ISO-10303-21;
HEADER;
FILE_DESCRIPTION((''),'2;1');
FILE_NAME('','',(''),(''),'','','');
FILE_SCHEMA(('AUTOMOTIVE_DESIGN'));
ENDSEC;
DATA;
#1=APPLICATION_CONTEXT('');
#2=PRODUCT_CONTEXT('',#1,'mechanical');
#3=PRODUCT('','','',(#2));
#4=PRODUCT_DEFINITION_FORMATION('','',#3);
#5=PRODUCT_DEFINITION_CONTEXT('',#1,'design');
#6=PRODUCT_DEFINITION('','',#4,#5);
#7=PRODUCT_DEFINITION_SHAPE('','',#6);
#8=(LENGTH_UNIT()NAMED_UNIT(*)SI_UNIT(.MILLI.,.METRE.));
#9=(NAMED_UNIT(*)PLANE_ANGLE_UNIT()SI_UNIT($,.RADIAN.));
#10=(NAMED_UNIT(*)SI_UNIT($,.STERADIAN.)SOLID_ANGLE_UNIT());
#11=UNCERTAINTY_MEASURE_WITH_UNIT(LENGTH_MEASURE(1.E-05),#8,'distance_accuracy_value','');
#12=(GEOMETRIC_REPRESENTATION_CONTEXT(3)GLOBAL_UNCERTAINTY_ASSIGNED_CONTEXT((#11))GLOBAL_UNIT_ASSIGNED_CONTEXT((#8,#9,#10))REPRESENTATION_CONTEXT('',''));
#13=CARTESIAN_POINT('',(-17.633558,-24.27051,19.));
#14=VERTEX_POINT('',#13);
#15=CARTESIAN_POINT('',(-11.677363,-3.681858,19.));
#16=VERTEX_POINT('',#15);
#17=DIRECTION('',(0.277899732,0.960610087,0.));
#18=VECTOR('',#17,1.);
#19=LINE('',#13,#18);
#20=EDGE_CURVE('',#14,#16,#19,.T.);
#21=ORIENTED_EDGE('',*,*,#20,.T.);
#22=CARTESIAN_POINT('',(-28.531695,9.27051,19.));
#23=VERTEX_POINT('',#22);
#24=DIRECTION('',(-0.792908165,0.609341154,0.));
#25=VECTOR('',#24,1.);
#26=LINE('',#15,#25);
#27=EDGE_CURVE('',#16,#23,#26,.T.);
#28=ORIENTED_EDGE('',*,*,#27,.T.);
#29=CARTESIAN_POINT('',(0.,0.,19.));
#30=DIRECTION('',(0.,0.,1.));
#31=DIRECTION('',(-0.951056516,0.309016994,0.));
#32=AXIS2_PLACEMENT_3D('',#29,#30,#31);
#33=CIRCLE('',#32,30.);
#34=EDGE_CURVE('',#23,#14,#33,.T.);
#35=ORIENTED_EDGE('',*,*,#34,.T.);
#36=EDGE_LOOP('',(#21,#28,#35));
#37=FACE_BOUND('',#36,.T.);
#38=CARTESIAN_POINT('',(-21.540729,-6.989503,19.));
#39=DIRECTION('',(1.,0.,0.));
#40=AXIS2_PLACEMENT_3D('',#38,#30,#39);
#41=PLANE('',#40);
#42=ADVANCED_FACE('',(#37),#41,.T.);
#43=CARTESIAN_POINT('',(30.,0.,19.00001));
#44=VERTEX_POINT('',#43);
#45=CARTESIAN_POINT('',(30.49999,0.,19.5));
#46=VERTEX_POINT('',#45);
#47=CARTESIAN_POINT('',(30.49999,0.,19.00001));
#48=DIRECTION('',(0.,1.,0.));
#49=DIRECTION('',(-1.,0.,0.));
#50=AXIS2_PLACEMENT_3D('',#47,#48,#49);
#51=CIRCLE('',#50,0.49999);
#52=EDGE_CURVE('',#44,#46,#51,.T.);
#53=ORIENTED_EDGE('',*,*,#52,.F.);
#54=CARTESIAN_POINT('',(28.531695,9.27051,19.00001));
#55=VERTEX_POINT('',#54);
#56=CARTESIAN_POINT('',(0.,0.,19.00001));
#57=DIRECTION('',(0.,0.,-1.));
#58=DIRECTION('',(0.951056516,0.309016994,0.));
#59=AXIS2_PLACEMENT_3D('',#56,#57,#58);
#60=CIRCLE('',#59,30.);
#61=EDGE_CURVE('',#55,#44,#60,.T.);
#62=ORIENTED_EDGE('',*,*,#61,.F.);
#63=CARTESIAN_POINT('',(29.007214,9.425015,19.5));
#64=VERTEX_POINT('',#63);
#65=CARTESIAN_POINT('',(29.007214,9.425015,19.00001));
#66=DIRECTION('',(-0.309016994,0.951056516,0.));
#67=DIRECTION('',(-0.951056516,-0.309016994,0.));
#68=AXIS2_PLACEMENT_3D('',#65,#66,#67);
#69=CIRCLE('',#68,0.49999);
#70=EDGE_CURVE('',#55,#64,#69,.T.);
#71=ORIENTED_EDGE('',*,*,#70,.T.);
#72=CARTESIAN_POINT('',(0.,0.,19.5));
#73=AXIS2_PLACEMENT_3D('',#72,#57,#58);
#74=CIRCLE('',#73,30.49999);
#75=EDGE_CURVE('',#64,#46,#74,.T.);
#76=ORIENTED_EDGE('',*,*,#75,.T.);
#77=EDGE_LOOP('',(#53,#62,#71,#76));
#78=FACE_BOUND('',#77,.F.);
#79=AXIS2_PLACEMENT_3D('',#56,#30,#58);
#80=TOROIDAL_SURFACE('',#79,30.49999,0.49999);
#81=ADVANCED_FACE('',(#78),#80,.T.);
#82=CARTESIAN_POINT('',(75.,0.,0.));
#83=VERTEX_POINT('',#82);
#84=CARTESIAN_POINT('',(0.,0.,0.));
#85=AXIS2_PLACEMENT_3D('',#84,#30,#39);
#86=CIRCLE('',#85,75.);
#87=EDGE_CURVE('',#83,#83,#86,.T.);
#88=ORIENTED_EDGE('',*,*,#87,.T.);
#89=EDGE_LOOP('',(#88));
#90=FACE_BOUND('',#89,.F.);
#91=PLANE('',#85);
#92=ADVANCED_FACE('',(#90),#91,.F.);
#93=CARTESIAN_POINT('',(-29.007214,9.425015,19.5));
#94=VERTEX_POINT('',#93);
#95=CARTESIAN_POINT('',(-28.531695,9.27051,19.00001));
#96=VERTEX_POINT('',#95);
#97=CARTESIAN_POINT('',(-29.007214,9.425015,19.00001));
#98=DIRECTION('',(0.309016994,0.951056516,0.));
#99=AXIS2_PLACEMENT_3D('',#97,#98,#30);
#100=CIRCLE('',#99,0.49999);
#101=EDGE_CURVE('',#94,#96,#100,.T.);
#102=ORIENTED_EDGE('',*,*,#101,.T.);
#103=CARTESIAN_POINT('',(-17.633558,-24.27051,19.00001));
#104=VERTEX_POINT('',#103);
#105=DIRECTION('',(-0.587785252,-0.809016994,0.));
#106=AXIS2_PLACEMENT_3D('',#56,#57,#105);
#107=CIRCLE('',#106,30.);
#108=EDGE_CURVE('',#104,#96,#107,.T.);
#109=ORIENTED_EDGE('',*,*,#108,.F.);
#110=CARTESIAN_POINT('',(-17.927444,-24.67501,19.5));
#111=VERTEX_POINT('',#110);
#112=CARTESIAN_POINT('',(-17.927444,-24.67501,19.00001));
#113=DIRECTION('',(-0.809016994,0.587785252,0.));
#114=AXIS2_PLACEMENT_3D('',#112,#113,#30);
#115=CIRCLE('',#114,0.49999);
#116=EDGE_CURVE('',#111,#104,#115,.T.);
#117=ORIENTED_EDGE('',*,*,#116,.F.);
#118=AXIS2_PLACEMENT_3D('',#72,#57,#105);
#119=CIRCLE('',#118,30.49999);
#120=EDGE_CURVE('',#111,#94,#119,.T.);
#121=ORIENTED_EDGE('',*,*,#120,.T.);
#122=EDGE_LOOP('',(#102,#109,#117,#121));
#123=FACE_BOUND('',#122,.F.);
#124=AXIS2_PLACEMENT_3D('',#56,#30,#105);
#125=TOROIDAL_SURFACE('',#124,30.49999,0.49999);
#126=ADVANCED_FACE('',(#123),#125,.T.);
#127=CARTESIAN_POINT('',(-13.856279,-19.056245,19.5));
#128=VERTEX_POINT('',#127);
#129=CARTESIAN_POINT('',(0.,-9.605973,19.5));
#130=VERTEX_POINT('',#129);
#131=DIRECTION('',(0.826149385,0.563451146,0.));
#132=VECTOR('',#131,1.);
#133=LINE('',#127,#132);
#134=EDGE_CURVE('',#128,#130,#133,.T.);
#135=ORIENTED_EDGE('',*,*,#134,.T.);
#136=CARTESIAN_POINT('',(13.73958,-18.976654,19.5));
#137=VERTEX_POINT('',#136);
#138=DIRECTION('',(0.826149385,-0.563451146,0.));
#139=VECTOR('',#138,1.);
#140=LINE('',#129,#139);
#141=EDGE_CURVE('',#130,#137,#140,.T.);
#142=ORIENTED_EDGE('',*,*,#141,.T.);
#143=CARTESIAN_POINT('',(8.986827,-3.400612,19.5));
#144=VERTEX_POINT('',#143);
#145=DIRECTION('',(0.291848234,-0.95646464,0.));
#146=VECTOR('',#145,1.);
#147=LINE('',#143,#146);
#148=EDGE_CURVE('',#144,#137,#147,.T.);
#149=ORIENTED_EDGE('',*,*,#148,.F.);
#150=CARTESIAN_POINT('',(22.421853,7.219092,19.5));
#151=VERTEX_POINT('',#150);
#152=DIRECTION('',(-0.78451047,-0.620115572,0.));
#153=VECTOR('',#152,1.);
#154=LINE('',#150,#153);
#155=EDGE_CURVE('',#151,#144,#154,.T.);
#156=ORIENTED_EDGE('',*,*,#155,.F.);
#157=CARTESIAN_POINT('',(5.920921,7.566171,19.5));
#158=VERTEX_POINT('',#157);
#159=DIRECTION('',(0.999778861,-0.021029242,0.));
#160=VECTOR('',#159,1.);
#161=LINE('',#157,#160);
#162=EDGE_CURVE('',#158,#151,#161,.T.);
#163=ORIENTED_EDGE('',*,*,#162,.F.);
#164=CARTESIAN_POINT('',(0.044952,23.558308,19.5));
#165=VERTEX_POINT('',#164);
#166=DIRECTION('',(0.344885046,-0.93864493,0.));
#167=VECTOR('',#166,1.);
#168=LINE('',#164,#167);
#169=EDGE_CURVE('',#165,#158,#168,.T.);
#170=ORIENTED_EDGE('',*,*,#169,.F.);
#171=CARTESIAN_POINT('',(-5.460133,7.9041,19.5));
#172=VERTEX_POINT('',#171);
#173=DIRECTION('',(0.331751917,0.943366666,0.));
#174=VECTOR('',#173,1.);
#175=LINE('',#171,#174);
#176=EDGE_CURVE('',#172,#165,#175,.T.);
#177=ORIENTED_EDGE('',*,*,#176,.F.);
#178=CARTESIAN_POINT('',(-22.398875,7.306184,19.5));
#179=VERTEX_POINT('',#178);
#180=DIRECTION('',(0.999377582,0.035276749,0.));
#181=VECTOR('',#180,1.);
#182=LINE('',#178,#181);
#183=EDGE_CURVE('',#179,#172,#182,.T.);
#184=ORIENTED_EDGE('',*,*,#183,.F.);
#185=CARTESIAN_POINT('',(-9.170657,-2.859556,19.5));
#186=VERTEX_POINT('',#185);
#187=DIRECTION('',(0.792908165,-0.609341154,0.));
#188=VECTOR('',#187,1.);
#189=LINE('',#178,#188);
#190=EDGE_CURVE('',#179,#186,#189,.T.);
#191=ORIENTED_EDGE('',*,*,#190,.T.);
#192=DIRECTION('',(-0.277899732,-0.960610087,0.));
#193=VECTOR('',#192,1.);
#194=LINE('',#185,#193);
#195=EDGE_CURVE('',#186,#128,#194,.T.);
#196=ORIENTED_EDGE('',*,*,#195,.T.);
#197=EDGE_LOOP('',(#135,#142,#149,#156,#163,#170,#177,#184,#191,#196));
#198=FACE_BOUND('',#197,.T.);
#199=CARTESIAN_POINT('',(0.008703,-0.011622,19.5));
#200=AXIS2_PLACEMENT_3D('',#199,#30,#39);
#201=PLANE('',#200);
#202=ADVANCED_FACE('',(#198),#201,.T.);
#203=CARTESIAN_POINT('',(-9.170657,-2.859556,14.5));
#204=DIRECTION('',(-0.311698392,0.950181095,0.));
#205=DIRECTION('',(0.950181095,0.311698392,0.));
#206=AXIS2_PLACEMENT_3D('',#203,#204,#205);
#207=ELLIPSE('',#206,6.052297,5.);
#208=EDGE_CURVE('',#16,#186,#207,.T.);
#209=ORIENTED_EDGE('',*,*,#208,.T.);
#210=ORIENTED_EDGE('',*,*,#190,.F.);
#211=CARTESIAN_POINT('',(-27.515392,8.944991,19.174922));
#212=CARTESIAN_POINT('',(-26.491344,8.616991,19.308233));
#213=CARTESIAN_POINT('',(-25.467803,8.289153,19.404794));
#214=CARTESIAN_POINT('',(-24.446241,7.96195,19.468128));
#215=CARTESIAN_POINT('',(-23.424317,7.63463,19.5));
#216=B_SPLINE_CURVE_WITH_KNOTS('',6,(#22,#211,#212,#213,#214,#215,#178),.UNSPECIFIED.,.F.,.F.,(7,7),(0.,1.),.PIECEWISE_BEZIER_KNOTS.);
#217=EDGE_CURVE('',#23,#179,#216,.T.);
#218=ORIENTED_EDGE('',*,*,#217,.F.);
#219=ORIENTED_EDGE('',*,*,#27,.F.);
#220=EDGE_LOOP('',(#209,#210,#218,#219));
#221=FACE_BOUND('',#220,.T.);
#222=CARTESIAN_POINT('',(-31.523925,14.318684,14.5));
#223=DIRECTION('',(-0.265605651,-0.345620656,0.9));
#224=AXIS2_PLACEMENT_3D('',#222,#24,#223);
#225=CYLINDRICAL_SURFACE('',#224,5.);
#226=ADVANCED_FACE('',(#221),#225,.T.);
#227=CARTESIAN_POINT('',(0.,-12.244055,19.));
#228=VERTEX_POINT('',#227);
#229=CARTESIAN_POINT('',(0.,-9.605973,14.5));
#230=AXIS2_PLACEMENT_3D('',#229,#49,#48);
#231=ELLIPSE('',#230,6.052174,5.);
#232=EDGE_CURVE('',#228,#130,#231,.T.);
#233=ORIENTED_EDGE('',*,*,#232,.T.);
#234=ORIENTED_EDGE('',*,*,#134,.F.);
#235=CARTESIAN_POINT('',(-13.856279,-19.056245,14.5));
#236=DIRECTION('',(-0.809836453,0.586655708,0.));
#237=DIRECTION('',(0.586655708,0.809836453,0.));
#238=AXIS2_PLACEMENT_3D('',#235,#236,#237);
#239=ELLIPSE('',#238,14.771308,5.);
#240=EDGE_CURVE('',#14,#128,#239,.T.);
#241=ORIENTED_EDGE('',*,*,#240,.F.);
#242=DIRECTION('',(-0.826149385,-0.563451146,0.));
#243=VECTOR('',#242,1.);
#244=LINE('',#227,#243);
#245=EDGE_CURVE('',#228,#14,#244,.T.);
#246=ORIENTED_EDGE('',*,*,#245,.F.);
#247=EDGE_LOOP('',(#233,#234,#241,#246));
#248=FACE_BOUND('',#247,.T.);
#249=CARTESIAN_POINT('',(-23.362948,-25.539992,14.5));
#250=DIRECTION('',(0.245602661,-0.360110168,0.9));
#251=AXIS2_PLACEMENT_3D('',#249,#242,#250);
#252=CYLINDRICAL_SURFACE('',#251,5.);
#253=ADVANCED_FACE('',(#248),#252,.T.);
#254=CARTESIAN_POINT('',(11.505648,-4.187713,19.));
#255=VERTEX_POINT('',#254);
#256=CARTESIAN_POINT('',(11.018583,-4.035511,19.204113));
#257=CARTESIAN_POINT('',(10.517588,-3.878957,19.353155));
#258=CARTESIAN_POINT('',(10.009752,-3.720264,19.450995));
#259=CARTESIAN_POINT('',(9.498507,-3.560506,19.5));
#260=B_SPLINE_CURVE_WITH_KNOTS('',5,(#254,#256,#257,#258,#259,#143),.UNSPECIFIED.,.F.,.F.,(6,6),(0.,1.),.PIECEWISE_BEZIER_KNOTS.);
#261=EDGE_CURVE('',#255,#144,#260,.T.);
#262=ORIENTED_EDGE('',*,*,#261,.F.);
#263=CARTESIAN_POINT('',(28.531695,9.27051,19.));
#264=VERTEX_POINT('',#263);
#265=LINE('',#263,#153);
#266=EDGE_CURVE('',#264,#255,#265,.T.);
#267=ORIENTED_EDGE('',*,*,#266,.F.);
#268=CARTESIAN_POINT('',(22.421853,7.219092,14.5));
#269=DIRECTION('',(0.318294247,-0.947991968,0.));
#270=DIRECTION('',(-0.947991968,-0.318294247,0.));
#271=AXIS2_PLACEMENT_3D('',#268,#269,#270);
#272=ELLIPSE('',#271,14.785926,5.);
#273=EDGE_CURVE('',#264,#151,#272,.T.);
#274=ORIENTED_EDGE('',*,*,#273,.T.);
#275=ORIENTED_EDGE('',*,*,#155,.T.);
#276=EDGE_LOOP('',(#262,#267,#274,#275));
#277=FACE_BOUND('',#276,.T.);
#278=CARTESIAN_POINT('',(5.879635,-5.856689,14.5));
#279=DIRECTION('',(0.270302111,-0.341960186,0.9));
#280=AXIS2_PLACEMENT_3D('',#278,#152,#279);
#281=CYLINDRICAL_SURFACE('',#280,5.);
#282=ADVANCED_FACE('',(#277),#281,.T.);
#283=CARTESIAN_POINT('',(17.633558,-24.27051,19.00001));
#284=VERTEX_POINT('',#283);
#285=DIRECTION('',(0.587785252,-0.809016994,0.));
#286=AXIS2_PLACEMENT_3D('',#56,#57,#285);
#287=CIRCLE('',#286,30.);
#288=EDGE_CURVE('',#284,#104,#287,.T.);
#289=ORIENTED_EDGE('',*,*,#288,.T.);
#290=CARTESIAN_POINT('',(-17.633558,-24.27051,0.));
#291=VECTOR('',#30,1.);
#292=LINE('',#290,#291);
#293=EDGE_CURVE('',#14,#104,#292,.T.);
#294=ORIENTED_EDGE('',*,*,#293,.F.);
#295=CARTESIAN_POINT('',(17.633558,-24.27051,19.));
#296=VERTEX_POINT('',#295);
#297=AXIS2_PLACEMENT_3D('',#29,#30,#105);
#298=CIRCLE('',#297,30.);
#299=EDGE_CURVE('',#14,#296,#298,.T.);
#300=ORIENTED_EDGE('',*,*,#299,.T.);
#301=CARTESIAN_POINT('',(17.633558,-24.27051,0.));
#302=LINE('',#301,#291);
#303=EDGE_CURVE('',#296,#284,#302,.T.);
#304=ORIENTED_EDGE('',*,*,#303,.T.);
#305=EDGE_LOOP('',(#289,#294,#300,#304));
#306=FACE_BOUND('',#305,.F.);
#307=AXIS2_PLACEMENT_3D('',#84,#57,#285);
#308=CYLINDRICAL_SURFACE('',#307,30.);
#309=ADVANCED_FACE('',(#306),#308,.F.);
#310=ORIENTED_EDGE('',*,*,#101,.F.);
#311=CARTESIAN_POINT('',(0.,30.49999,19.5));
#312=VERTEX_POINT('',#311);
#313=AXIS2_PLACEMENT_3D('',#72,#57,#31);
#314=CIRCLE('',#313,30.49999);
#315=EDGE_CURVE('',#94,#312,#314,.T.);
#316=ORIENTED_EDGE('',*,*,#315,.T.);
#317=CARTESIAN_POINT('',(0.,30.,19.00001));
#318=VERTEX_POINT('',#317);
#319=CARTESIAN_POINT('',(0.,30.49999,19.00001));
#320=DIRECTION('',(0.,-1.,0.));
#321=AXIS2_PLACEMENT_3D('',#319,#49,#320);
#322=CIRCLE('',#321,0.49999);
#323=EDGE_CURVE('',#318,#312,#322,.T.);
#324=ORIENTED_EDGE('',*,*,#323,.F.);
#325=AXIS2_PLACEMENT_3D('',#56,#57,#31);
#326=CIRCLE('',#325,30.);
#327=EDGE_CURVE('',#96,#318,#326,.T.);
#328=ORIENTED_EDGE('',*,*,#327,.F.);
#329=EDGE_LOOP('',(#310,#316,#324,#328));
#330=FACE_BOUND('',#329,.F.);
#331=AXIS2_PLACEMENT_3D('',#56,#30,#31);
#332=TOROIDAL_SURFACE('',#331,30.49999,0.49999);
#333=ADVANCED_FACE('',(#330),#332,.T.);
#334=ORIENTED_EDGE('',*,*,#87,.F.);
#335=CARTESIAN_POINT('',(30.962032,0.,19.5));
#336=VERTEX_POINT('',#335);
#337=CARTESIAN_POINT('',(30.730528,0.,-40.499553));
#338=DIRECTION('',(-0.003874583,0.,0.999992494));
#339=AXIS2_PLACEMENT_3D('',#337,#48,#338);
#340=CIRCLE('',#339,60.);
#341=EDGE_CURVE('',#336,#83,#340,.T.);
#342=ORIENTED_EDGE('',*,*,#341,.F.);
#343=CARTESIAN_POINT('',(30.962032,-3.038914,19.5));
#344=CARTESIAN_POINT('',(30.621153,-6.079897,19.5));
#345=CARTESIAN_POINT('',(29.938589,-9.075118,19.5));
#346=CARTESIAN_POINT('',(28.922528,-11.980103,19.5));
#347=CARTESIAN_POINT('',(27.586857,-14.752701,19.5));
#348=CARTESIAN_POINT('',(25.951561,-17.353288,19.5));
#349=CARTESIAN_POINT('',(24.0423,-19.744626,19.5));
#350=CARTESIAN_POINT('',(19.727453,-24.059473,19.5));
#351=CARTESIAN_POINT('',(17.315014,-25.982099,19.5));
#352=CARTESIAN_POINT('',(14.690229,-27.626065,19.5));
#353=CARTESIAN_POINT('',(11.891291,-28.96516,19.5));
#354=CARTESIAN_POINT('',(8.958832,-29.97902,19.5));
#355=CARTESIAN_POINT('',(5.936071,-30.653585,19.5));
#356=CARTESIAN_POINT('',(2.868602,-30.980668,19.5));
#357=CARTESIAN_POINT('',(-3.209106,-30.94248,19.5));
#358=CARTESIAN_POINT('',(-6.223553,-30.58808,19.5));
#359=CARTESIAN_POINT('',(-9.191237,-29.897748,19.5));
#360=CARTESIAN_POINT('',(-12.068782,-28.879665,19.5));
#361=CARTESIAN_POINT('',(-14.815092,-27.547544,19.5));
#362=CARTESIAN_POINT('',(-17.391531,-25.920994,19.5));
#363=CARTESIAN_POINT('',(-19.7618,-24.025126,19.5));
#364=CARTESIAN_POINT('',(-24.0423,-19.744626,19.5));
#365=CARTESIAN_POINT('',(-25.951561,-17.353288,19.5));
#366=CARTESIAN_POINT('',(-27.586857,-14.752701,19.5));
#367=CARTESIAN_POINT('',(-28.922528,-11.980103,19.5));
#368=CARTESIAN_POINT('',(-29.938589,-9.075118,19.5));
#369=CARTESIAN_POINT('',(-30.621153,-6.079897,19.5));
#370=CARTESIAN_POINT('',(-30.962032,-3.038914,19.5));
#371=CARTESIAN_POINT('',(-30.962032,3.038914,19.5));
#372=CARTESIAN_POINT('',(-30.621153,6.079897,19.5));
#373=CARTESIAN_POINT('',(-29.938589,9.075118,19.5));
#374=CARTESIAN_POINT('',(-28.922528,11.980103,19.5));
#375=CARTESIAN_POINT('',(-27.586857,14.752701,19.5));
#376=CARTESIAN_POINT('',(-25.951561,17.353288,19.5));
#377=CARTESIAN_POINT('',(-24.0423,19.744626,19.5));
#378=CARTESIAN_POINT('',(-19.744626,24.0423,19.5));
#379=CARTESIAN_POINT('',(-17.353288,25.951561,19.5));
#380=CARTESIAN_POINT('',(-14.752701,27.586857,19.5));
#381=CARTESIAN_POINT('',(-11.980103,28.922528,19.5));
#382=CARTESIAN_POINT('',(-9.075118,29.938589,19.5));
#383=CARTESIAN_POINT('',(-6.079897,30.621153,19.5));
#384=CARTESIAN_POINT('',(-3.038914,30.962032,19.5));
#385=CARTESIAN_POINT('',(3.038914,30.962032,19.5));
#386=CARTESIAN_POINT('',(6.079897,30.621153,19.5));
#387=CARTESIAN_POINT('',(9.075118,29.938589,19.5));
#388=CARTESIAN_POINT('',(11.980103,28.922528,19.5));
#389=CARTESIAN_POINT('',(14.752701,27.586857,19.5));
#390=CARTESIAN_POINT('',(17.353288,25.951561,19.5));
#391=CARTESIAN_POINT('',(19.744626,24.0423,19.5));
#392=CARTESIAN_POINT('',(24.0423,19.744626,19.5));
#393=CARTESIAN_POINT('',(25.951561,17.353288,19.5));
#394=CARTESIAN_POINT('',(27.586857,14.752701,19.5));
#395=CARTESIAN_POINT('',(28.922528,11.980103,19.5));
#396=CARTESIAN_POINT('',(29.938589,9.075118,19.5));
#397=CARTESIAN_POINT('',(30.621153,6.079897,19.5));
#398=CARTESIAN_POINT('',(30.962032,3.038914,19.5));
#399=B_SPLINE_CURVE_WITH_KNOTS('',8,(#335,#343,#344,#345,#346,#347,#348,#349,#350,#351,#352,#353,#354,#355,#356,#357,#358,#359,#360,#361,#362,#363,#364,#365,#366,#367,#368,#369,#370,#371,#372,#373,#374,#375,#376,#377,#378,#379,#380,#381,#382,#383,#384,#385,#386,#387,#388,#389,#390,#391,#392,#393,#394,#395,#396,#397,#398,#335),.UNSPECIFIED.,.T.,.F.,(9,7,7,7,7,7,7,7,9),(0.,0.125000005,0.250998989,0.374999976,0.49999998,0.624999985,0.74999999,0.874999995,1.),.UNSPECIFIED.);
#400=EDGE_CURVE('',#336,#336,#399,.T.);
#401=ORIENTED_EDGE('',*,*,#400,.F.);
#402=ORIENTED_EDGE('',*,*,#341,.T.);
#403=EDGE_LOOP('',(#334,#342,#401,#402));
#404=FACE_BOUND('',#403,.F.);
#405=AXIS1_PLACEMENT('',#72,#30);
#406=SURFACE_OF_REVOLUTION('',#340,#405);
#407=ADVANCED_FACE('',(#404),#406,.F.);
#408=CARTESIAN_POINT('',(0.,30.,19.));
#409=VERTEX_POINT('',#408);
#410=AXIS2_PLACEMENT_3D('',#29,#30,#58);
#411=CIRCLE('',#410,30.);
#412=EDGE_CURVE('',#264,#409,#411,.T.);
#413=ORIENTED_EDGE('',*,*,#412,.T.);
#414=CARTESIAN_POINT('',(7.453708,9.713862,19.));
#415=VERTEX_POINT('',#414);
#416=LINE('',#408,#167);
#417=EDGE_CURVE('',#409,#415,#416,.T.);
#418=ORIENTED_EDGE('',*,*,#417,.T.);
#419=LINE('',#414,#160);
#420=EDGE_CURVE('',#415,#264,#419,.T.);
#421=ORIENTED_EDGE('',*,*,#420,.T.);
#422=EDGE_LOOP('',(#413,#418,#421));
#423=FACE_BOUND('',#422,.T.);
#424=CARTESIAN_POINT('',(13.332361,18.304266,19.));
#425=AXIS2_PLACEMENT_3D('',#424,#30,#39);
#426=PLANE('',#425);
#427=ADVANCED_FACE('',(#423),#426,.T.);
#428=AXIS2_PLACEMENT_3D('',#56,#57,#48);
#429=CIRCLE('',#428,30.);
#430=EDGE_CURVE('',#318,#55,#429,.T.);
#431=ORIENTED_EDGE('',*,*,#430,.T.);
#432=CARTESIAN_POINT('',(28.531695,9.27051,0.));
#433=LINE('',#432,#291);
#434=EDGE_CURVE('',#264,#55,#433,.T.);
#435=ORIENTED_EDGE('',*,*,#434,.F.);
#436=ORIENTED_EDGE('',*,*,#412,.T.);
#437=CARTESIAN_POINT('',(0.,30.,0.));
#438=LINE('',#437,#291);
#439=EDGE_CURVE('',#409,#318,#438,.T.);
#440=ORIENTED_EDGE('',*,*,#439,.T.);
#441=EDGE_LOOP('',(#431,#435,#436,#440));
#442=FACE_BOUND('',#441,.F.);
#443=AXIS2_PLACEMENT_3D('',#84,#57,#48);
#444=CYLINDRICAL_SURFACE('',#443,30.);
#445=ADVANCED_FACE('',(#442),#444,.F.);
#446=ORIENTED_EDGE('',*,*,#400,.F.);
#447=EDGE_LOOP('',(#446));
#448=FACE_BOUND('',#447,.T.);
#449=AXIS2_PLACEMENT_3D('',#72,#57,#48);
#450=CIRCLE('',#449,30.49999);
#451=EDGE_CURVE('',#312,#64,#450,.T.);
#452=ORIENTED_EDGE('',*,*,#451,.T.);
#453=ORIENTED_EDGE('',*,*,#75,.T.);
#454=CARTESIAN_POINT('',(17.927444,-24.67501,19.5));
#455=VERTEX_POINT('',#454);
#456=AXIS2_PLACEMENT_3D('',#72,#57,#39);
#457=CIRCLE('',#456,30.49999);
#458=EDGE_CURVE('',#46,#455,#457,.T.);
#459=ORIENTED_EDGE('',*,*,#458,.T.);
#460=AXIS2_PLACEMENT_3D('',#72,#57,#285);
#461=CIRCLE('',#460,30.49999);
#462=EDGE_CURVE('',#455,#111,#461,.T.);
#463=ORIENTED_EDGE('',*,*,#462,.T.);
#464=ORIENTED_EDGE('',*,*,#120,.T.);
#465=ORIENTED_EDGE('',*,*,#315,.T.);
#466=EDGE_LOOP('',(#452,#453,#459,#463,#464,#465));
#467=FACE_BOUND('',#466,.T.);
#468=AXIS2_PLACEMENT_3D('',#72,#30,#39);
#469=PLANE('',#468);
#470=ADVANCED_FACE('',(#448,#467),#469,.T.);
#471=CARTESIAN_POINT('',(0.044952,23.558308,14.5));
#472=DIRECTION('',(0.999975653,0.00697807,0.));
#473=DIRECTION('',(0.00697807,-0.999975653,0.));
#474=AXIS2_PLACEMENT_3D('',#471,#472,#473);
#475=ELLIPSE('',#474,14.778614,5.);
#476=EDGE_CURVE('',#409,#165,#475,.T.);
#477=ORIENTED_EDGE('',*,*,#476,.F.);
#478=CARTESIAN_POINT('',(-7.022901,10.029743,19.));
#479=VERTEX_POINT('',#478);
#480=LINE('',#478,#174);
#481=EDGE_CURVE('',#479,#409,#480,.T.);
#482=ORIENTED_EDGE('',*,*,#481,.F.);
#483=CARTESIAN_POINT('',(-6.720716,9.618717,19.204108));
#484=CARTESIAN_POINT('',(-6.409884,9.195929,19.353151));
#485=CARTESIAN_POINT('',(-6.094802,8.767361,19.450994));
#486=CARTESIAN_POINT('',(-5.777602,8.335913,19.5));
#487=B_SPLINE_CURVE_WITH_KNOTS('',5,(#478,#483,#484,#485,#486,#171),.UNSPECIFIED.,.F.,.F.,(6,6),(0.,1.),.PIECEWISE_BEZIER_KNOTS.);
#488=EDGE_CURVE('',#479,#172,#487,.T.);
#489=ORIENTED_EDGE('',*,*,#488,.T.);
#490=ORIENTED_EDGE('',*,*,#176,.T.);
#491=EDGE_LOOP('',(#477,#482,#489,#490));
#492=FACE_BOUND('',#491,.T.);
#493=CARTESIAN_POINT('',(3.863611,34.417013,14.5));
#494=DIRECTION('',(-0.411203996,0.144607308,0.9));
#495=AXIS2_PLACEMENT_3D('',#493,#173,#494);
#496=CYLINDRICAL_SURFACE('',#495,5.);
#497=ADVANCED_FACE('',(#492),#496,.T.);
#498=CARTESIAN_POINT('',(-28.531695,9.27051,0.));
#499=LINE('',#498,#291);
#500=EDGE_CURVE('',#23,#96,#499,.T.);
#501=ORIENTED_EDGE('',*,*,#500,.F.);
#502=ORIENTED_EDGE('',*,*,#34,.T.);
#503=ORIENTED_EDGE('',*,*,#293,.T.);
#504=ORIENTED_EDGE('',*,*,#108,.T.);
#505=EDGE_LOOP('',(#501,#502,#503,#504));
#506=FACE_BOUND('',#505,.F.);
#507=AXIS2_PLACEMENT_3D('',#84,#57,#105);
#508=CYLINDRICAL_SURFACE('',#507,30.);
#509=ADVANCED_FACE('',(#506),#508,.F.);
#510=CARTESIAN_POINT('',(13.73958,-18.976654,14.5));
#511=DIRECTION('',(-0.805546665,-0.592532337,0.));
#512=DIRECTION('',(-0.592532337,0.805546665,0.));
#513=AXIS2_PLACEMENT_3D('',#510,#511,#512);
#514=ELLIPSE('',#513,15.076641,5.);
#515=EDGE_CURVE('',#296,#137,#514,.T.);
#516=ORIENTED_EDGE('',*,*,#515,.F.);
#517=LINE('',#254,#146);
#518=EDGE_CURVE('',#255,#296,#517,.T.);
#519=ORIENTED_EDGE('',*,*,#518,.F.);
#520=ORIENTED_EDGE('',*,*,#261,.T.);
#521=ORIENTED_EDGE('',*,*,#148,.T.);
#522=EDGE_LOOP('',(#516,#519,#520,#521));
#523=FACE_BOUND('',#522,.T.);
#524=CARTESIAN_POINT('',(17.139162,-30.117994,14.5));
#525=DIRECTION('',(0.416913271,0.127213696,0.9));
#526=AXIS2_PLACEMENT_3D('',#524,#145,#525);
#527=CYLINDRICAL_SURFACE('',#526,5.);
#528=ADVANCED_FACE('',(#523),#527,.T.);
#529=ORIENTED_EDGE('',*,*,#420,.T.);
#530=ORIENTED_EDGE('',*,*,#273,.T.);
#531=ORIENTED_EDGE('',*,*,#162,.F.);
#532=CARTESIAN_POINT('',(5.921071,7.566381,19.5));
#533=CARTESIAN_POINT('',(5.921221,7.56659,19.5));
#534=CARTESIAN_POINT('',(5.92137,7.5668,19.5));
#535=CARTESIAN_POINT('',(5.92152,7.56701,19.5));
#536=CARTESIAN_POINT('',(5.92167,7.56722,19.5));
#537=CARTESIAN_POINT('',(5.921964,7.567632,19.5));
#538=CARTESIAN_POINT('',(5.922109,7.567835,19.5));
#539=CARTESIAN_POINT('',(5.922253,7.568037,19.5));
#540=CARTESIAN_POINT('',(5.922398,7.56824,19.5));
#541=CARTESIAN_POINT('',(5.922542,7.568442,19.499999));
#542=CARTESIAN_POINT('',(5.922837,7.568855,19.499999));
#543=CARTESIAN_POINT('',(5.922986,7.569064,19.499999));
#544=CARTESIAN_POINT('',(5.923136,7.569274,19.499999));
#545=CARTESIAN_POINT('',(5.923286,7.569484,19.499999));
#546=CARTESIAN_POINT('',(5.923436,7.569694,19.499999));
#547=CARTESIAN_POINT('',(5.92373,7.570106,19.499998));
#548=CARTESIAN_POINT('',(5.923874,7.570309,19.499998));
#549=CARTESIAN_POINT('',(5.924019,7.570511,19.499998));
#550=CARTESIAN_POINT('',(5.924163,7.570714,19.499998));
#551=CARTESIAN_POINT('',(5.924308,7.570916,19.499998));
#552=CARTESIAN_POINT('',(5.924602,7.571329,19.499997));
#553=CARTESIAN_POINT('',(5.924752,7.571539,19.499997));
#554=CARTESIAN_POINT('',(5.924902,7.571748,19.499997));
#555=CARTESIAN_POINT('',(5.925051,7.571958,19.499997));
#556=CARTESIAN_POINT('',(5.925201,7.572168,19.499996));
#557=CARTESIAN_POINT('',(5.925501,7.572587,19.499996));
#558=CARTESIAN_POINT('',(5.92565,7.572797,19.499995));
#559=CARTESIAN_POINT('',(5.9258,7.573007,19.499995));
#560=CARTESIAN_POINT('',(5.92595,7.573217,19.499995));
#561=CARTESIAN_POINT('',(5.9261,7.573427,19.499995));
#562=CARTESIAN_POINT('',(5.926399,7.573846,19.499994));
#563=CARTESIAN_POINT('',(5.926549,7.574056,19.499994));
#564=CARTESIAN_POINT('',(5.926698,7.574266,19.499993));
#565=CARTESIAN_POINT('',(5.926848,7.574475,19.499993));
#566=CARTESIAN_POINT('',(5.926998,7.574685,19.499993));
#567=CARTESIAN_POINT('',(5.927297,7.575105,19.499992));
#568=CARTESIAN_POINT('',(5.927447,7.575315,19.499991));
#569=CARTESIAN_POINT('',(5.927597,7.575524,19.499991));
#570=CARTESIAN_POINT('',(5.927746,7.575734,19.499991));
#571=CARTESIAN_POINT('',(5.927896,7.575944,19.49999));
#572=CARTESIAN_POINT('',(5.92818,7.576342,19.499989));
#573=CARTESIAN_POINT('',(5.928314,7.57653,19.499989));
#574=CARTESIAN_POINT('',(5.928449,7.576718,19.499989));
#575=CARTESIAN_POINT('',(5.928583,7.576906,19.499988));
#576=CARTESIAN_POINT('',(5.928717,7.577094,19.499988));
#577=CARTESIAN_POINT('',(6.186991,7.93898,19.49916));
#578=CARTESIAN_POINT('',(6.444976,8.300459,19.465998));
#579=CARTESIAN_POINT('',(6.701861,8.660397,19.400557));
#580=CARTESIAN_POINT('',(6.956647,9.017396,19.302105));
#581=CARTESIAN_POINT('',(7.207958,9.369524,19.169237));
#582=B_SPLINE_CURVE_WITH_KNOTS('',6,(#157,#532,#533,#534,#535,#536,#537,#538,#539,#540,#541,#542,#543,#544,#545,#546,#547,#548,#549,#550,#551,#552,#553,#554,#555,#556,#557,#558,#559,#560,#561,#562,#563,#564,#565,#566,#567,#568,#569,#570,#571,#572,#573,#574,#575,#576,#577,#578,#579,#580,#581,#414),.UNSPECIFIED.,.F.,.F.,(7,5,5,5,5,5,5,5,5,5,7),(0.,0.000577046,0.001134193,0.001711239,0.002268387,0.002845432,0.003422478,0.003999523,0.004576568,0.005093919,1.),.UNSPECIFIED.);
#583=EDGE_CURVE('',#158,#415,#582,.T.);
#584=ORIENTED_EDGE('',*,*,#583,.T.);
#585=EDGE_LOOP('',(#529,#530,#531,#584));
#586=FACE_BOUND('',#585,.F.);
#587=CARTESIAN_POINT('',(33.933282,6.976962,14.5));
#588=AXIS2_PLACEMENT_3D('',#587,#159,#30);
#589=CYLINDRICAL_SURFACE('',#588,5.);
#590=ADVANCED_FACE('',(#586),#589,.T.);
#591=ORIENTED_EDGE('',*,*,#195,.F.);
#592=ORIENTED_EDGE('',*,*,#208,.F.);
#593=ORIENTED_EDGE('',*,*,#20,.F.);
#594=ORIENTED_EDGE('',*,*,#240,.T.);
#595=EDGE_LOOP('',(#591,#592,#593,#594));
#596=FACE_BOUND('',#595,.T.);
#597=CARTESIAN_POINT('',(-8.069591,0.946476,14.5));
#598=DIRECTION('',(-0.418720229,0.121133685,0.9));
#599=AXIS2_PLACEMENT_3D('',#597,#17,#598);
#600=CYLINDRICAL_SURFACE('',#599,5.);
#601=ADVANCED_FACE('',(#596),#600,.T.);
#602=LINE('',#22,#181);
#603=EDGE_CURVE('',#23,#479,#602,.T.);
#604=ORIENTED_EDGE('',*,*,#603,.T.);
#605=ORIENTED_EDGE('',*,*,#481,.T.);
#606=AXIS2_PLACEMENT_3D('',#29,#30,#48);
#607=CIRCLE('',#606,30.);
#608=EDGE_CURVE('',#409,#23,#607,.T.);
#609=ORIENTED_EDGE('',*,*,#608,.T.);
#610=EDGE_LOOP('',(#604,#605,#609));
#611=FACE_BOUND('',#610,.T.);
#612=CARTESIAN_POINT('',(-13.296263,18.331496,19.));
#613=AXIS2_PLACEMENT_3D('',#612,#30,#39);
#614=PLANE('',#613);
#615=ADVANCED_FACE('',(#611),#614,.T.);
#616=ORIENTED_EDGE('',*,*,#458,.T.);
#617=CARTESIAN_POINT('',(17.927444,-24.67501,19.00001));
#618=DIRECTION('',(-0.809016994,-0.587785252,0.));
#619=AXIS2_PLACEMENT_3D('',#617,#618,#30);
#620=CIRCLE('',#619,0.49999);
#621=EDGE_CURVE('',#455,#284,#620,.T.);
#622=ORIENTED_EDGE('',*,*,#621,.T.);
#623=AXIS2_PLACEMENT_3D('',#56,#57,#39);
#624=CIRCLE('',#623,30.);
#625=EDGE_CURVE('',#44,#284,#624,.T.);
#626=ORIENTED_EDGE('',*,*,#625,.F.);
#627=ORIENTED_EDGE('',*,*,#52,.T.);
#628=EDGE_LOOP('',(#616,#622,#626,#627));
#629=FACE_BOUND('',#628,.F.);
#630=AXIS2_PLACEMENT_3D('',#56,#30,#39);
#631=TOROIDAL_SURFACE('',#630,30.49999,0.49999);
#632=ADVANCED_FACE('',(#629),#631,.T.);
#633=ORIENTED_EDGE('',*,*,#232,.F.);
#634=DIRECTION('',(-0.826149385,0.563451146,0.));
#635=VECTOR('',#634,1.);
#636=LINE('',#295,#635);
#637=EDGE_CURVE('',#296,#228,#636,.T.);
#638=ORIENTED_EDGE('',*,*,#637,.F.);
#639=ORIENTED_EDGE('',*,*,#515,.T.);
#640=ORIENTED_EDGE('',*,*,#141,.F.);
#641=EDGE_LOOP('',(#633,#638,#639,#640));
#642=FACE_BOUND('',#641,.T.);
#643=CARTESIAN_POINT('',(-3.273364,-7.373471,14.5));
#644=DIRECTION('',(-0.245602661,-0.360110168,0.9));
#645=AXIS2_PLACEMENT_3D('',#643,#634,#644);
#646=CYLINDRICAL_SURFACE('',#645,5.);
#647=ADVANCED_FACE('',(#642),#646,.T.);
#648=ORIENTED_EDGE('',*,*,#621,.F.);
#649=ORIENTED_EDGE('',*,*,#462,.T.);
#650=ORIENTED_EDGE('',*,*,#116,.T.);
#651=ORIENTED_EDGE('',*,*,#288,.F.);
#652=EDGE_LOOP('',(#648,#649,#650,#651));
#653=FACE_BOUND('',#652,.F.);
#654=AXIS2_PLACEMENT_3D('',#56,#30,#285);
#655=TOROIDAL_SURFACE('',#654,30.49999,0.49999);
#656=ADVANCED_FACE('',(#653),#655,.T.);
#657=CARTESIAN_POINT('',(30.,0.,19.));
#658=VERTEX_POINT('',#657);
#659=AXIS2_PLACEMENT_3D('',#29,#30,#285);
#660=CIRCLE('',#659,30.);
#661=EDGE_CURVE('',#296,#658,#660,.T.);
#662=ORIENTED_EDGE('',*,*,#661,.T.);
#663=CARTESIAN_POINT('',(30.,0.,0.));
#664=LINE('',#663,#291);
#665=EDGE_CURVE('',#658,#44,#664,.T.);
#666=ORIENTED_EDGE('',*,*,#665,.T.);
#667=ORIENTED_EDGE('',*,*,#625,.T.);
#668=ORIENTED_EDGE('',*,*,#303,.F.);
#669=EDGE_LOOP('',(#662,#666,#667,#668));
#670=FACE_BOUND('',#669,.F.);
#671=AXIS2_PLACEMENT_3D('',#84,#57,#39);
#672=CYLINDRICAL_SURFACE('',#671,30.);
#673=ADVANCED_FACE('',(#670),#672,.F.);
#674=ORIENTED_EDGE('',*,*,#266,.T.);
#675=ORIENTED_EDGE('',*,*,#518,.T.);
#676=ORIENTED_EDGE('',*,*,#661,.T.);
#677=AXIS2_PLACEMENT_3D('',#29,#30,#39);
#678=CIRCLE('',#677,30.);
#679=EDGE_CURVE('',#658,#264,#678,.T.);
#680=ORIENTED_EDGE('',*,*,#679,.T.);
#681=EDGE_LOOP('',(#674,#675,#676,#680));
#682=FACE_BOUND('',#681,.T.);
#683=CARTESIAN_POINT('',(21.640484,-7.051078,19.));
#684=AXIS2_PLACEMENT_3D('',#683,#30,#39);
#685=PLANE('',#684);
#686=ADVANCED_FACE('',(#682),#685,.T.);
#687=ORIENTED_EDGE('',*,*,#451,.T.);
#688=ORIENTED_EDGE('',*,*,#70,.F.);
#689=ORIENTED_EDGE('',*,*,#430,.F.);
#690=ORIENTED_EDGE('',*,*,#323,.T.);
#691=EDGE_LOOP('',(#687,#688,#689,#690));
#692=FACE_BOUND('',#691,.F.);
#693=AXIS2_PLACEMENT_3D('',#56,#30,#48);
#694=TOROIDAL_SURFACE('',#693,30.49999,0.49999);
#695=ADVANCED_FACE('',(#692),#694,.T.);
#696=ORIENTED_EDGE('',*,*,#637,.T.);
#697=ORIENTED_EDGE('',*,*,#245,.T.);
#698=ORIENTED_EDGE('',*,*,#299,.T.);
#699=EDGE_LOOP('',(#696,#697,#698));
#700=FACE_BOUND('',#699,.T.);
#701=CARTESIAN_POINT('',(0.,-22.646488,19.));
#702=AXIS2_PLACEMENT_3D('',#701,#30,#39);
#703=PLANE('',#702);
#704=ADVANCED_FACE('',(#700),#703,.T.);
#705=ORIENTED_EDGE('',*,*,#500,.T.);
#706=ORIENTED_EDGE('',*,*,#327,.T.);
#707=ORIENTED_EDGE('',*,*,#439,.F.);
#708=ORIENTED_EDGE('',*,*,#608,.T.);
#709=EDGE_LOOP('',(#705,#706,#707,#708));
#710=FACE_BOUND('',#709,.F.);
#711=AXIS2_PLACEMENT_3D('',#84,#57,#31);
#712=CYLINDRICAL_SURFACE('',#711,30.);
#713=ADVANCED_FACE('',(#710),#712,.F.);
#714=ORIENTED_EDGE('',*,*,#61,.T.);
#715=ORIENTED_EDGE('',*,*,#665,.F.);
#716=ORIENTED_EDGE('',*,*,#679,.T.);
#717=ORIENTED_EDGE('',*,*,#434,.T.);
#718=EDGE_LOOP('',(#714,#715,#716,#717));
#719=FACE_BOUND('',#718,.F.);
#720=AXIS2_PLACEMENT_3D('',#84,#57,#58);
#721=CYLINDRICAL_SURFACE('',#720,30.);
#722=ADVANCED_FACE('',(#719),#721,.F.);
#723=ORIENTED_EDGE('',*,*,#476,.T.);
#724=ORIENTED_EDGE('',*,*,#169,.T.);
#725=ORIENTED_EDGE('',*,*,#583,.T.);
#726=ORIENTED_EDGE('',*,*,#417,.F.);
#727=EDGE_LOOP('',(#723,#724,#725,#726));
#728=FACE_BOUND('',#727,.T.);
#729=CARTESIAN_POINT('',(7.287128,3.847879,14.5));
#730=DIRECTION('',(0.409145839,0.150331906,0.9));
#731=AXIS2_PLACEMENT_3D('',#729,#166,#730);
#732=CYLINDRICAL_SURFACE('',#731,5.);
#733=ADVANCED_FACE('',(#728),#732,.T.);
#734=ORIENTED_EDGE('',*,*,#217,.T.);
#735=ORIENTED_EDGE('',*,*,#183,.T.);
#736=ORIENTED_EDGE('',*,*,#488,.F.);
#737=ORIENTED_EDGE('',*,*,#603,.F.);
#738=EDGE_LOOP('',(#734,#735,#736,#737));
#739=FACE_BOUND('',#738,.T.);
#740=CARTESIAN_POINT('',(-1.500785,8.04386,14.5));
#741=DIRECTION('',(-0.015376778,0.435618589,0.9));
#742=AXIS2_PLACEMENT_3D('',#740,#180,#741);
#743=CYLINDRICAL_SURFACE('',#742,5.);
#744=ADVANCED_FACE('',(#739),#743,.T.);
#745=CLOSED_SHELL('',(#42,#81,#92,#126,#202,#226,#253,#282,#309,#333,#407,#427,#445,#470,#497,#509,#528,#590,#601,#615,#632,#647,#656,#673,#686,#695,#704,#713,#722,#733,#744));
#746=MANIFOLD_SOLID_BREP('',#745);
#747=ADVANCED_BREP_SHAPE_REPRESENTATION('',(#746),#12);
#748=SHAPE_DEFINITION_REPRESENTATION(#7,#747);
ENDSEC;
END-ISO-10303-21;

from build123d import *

# Parameters (mm, degrees)
F1_DEPTH      = 19.5
F2_DEPTH      = 19
F3_T4_DEPTH   = 32.6000135718
F3_T9_DEPTH   = 31.9798965953
F3_T14_DEPTH  = 32.5094005548
F3_T19_DEPTH  = 32.0663833981
F3_T24_DEPTH  = 32.41943719
F3_T29_DEPTH  = 32.1535963091
F3_T34_DEPTH  = 32.3301385521
F3_T39_DEPTH  = 32.241519827
F3_T44_DEPTH  = 32.241519827
F3_T49_DEPTH  = 31.8941515
F3_T55_DEPTH  = 32.6000135718
F3_T59_DEPTH  = 31.8941515
F3_T66_DEPTH  = 32.5094005548
F3_T70_DEPTH  = 31.9798965953
F3_T77_DEPTH  = 32.41943719
F3_T81_DEPTH  = 32.0663833981
F3_T88_DEPTH  = 32.3301385521
F3_T92_DEPTH  = 32.1535963091
F3_T99_DEPTH  = 32.241519827
F3_T103_DEPTH = 32.241519827
F0_R          = 45
F4_DEPTH      = 19.5
F5_R          = 0.49999
F0_R_2        = 75
F0_R_3        = 60
F6_DEPTH      = 19.5


# Not quite as in the source:
# - a fillet or chamfer that OpenCascade refuses, or shapes differently, is made with other operations: its cross-section is extruded or revolved along the edge and cut away or added
# - a fillet or chamfer is up to 0.001 mm smaller than in the source, because OpenCascade refuses the exact size
# - the program builds the solid bodies; features that only make, move or delete a surface that nothing else refers to are left out


with BuildPart() as f1:
    # F0 (on Top) → F1 (new body)
    with BuildSketch(Plane.XY):
        Polygon((11.5056481768, -4.1877134623), (28.5316954889, 9.2705098312), (7.4537084477, 9.7138619707), (0, 30), (-7.0229014607, 10.0297427227), (-28.5316954889, 9.2705098312), (-11.6773628448, -3.6818583623), (-17.6335575688, -24.2705098312), (0, -12.2440550476), (17.6335575688, -24.2705098312), align=None)
    extrude(amount=F1_DEPTH)

    # F0 (on Top) → F2 (join)
    with BuildSketch(Plane.XY):
        with BuildLine():
            Line((7.4537084477, 9.7138619707), (28.5316954889, 9.2705098312))
            ThreePointArc((28.5316954889, 9.2705098312), (17.6335575688, 24.2705098312), (0, 30))
            Line((0, 30), (7.4537084477, 9.7138619707))
        make_face()
        with BuildLine():
            Line((-7.0229014607, 10.0297427227), (0, 30))
            ThreePointArc((0, 30), (-17.6335575688, 24.2705098312), (-28.5316954889, 9.2705098312))
            Line((-28.5316954889, 9.2705098312), (-7.0229014607, 10.0297427227))
        make_face()
        with BuildLine():
            ThreePointArc((-28.5316954889, 9.2705098312), (-28.5316954889, -9.2705098312), (-17.6335575688, -24.2705098312))
            Line((-17.6335575688, -24.2705098312), (-11.6773628448, -3.6818583623))
            Line((-11.6773628448, -3.6818583623), (-28.5316954889, 9.2705098312))
        make_face()
        with BuildLine():
            ThreePointArc((-17.6335575688, -24.2705098312), (0, -30), (17.6335575688, -24.2705098312))
            Line((17.6335575688, -24.2705098312), (0, -12.2440550476))
            Line((0, -12.2440550476), (-17.6335575688, -24.2705098312))
        make_face()
        with BuildLine():
            ThreePointArc((17.6335575688, -24.2705098312), (26.7301957257, -13.6197149922), (30, 0))
            ThreePointArc((30, 0), (29.6306502179, 4.6930339512), (28.5316954889, 9.2705098312))
            Line((28.5316954889, 9.2705098312), (11.5056481768, -4.1877134623))
            Line((11.5056481768, -4.1877134623), (17.6335575688, -24.2705098312))
        make_face()
    extrude(amount=F2_DEPTH)

    # F3: fillet of radius 5 on 10 edges, made by hand


with BuildPart() as f3_tool2:
    # F3_s3 → F3_t4 (new body)
    with BuildSketch(Plane(origin=(0.7694568459, 0.6082164496, 0), x_dir=(0, 0, 1), z_dir=(0.7845104695, 0.6201155724, 0))):
        with BuildLine():
            ThreePointArc((19, 10.42013666), (19.3733971724, 9.3587211769), (19.5, 8.2406871882))
            Line((19.5, 8.2406871882), (19.5, 10.42013666))
            Line((19.5, 10.42013666), (19, 10.42013666))
        make_face()
    extrude(amount=F3_T4_DEPTH)

    split(bisect_by=Plane(origin=(9.3566812143, 2.8550254475, 0), x_dir=(0, 0, 1), z_dir=(0.9564646404, 0.2918482339, 0)), keep=Keep.TOP)


with BuildPart() as f1_1:
    add(f1.part)

    # F3_t1: cut F3_tool2
    add(f3_tool2.part, mode=Mode.SUBTRACT)


with BuildPart() as f3_tool7:
    # F3_s8 → F3_t9 (new body)
    with BuildSketch(Plane(origin=(33.771588035, -0.7103479939, 0), x_dir=(0, 0, 1), z_dir=(-0.999778861, 0.0210292423, 0))):
        with BuildLine():
            ThreePointArc((19.5, 7.6890102267), (19.3733971724, 8.8070442154), (19, 9.8684596985))
            Line((19, 9.8684596985), (19.5, 9.8684596985))
            Line((19.5, 9.8684596985), (19.5, 7.6890102267))
        make_face()
    extrude(amount=F3_T9_DEPTH)

    split(bisect_by=Plane(origin=(9.7117379965, 3.5683708472, 0), x_dir=(0, 0, 1), z_dir=(0.9386449303, 0.3448850459, 0)), keep=Keep.TOP)


with BuildPart() as f1_2:
    add(f1_1.part)

    # F3_t6: cut F3_tool7
    add(f3_tool7.part, mode=Mode.SUBTRACT)


with BuildPart() as f3_tool12:
    # F3_s13 → F3_t14 (new body)
    with BuildSketch(Plane(origin=(-0.3788807209, 1.03116813, 0), x_dir=(0, 0, 1), z_dir=(-0.3448850459, 0.9386449303, 0))):
        with BuildLine():
            ThreePointArc((19, 10.3465513779), (19.3733971724, 9.2851358949), (19.5, 8.1671019062))
            Line((19.5, 8.1671019062), (19.5, 10.3465513779))
            Line((19.5, 10.3465513779), (19, 10.3465513779))
        make_face()
    extrude(amount=F3_T14_DEPTH)

    split(bisect_by=Plane(origin=(0.2075262303, 9.8662773975, 0), x_dir=(0, 0, 1), z_dir=(0.0210292423, 0.999778861, 0)), keep=Keep.TOP)


with BuildPart() as f1_3:
    add(f1_2.part)

    # F3_t11: cut F3_tool12
    add(f3_tool12.part, mode=Mode.SUBTRACT)


with BuildPart() as f3_tool17:
    # F3_s18 → F3_t19 (new body)
    with BuildSketch(Plane(origin=(11.1965023398, 31.8382699206, 0), x_dir=(0, 0, 1), z_dir=(-0.3317519169, -0.9433666655, 0))):
        with BuildLine():
            ThreePointArc((19, 9.9525575078), (19.3733971724, 8.8911420248), (19.5, 7.773108036))
            Line((19.5, 7.773108036), (19.5, 9.9525575078))
            Line((19.5, 9.9525575078), (19, 9.9525575078))
        make_face()
    extrude(amount=F3_T19_DEPTH)

    split(bisect_by=Plane(origin=(-0.3623361388, 10.264852151, 0), x_dir=(0, 0, 1), z_dir=(-0.0352767491, 0.9993775818, 0)), keep=Keep.TOP)


with BuildPart() as f1_4:
    add(f1_3.part)

    # F3_t16: cut F3_tool17
    add(f3_tool17.part, mode=Mode.SUBTRACT)


with BuildPart() as f3_tool22:
    # F3_s23 → F3_t24 (new body)
    with BuildSketch(Plane(origin=(-1.2153329651, -0.0428996977, 0), x_dir=(0, 0, 1), z_dir=(-0.9993775818, -0.0352767491, 0))):
        with BuildLine():
            ThreePointArc((19, 10.2712451611), (19.3733971724, 9.209829678), (19.5, 8.0917956893))
            Line((19.5, 8.0917956893), (19.5, 10.2712451611))
            Line((19.5, 10.2712451611), (19, 10.2712451611))
        make_face()
    extrude(amount=F3_T24_DEPTH)

    split(bisect_by=Plane(origin=(-9.3889109895, 3.3017800315, 0), x_dir=(0, 0, 1), z_dir=(-0.9433666655, 0.3317519169, 0)), keep=Keep.TOP)


with BuildPart() as f1_5:
    add(f1_4.part)

    # F3_t21: cut F3_tool22
    add(f3_tool22.part, mode=Mode.SUBTRACT)


with BuildPart() as f3_tool27:
    # F3_s28 → F3_t29 (new body)
    with BuildSketch(Plane(origin=(-26.7372924148, 20.5473134516, 0), x_dir=(0, 0, 1), z_dir=(0.7929081652, -0.6093411537, 0))):
        with BuildLine():
            ThreePointArc((19, 10.0348733068), (19.3733971724, 8.9734578238), (19.5, 7.855423835))
            Line((19.5, 7.855423835), (19.5, 10.0348733068))
            Line((19.5, 10.0348733068), (19, 10.0348733068))
        make_face()
    extrude(amount=F3_T29_DEPTH)

    split(bisect_by=Plane(origin=(-9.792656229, 2.832966863, 0), x_dir=(0, 0, 1), z_dir=(-0.9606100868, 0.2778997323, 0)), keep=Keep.TOP)


with BuildPart() as f1_6:
    add(f1_5.part)

    # F3_t26: cut F3_tool27
    add(f3_tool27.part, mode=Mode.SUBTRACT)


with BuildPart() as f3_tool32:
    # F3_s33 → F3_t34 (new body)
    with BuildSketch(Plane(origin=(-0.3705355542, -1.2808223597, 0), x_dir=(0, 0, 1), z_dir=(-0.2778997323, -0.9606100868, 0))):
        with BuildLine():
            ThreePointArc((19, 10.1942050826), (19.3733971724, 9.1327895996), (19.5, 8.0147556108))
            Line((19.5, 8.0147556108), (19.5, 10.1942050826))
            Line((19.5, 10.1942050826), (19, 10.1942050826))
        make_face()
    extrude(amount=F3_T34_DEPTH)

    split(bisect_by=Plane(origin=(-6.1146612783, -7.9567329812, 0), x_dir=(0, 0, 1), z_dir=(-0.6093411537, -0.7929081652, 0)), keep=Keep.TOP)


with BuildPart() as f1_7:
    add(f1_6.part)

    # F3_t31: cut F3_tool32
    add(f3_tool32.part, mode=Mode.SUBTRACT)


with BuildPart() as f3_tool37:
    # F3_s38 → F3_t39 (new body)
    with BuildSketch(Plane(origin=(-27.8344788416, -18.9836962796, 0), x_dir=(0, 0, 1), z_dir=(0.8261493848, 0.563451146, 0))):
        with BuildLine():
            ThreePointArc((19, 10.1154185452), (19.3733971724, 9.0540030622), (19.5, 7.9359690734))
            Line((19.5, 7.9359690734), (19.5, 10.1154185452))
            Line((19.5, 10.1154185452), (19, 10.1154185452))
        make_face()
    extrude(amount=F3_T39_DEPTH)

    split(bisect_by=Plane(origin=(-5.699544172, -8.3568468082, 0), x_dir=(0, 0, 1), z_dir=(-0.563451146, -0.8261493848, 0)), keep=Keep.TOP)


with BuildPart() as f1_8:
    add(f1_7.part)

    # F3_t36: cut F3_tool37
    add(f3_tool37.part, mode=Mode.SUBTRACT)


with BuildPart() as f3_tool42:
    # F3_s43 → F3_t44 (new body)
    with BuildSketch(Plane(origin=(1.1981670712, -0.8171749829, 0), x_dir=(0, 0, 1), z_dir=(0.8261493848, -0.563451146, 0))):
        with BuildLine():
            ThreePointArc((19, 10.1154185452), (19.3733971724, 9.0540030622), (19.5, 7.9359690734))
            Line((19.5, 7.9359690734), (19.5, 10.1154185452))
            Line((19.5, 10.1154185452), (19, 10.1154185452))
        make_face()
    extrude(amount=F3_T44_DEPTH)

    split(bisect_by=Plane(origin=(5.699544172, -8.3568468082, 0), x_dir=(0, 0, 1), z_dir=(0.563451146, -0.8261493848, 0)), keep=Keep.TOP)


with BuildPart() as f1_9:
    add(f1_8.part)

    # F3_t41: cut F3_tool42
    add(f3_tool42.part, mode=Mode.SUBTRACT)


with BuildPart() as f3_tool47:
    # F3_s48 → F3_t49 (new body)
    with BuildSketch(Plane(origin=(9.8670475528, -32.336951167, 0), x_dir=(0, 0, 1), z_dir=(-0.2918482339, 0.9564646404, 0))):
        with BuildLine():
            ThreePointArc((19, 9.7825688677), (19.3733971724, 8.7211533847), (19.5, 7.603119396))
            Line((19.5, 7.603119396), (19.5, 9.7825688677))
            Line((19.5, 9.7825688677), (19, 9.7825688677))
        make_face()
    extrude(amount=F3_T49_DEPTH)

    split(bisect_by=Plane(origin=(6.4616890097, -8.1747063038, 0), x_dir=(0, 0, 1), z_dir=(0.6201155724, -0.7845104695, 0)), keep=Keep.TOP)


with BuildPart() as f1_10:
    add(f1_9.part)

    # F3_t46: cut F3_tool47
    add(f3_tool47.part, mode=Mode.SUBTRACT)


with BuildPart() as f3_tool53:
    # F3_s54 → F3_t55 (new body)
    with BuildSketch(Plane(origin=(0.7694568459, 0.6082164496, 0), x_dir=(0, 0, 1), z_dir=(0.7845104695, 0.6201155724, 0))):
        with BuildLine():
            ThreePointArc((19, 10.42013666), (19.3733971724, 9.3587211769), (19.5, 8.2406871882))
            Line((19.5, 8.2406871882), (19.5, 10.42013666))
            Line((19.5, 10.42013666), (19, 10.42013666))
        make_face()
    extrude(amount=F3_T55_DEPTH)

    split(bisect_by=Plane(origin=(9.3566812143, 2.8550254475, 0), x_dir=(0, 0, 1), z_dir=(-0.9564646404, -0.2918482339, 0)), keep=Keep.TOP)


with BuildPart() as f3_tool57:
    # F3_s58 → F3_t59 (new body)
    with BuildSketch(Plane(origin=(9.8670475528, -32.336951167, 0), x_dir=(0, 0, 1), z_dir=(-0.2918482339, 0.9564646404, 0))):
        with BuildLine():
            ThreePointArc((19, 9.7825688677), (19.3733971724, 8.7211533847), (19.5, 7.603119396))
            Line((19.5, 7.603119396), (19.5, 9.7825688677))
            Line((19.5, 9.7825688677), (19, 9.7825688677))
        make_face()
    extrude(amount=F3_T59_DEPTH)

    split(bisect_by=Plane(origin=(6.4616890097, -8.1747063038, 0), x_dir=(0, 0, 1), z_dir=(-0.6201155724, 0.7845104695, 0)), keep=Keep.TOP)


with BuildPart() as f3_tool53_1:
    add(f3_tool53.part)

    # F3_t61: intersect F3_tool57
    add(f3_tool57.part, mode=Mode.INTERSECT)


with BuildPart() as f1_11:
    add(f1_10.part)

    # F3_t51: cut F3_tool53
    add(f3_tool53_1.part, mode=Mode.SUBTRACT)


with BuildPart() as f3_tool64:
    # F3_s65 → F3_t66 (new body)
    with BuildSketch(Plane(origin=(-0.3788807209, 1.03116813, 0), x_dir=(0, 0, 1), z_dir=(-0.3448850459, 0.9386449303, 0))):
        with BuildLine():
            ThreePointArc((19, 10.3465513779), (19.3733971724, 9.2851358949), (19.5, 8.1671019062))
            Line((19.5, 8.1671019062), (19.5, 10.3465513779))
            Line((19.5, 10.3465513779), (19, 10.3465513779))
        make_face()
    extrude(amount=F3_T66_DEPTH)

    split(bisect_by=Plane(origin=(0.2075262303, 9.8662773975, 0), x_dir=(0, 0, 1), z_dir=(-0.0210292423, -0.999778861, 0)), keep=Keep.TOP)


with BuildPart() as f3_tool68:
    # F3_s69 → F3_t70 (new body)
    with BuildSketch(Plane(origin=(33.771588035, -0.7103479939, 0), x_dir=(0, 0, 1), z_dir=(-0.999778861, 0.0210292423, 0))):
        with BuildLine():
            ThreePointArc((19.5, 7.6890102267), (19.3733971724, 8.8070442154), (19, 9.8684596985))
            Line((19, 9.8684596985), (19.5, 9.8684596985))
            Line((19.5, 9.8684596985), (19.5, 7.6890102267))
        make_face()
    extrude(amount=F3_T70_DEPTH)

    split(bisect_by=Plane(origin=(9.7117379965, 3.5683708472, 0), x_dir=(0, 0, 1), z_dir=(-0.9386449303, -0.3448850459, 0)), keep=Keep.TOP)


with BuildPart() as f3_tool64_1:
    add(f3_tool64.part)

    # F3_t72: intersect F3_tool68
    add(f3_tool68.part, mode=Mode.INTERSECT)


with BuildPart() as f1_12:
    add(f1_11.part)

    # F3_t62: cut F3_tool64
    add(f3_tool64_1.part, mode=Mode.SUBTRACT)


with BuildPart() as f3_tool75:
    # F3_s76 → F3_t77 (new body)
    with BuildSketch(Plane(origin=(-1.2153329651, -0.0428996977, 0), x_dir=(0, 0, 1), z_dir=(-0.9993775818, -0.0352767491, 0))):
        with BuildLine():
            ThreePointArc((19, 10.2712451611), (19.3733971724, 9.209829678), (19.5, 8.0917956893))
            Line((19.5, 8.0917956893), (19.5, 10.2712451611))
            Line((19.5, 10.2712451611), (19, 10.2712451611))
        make_face()
    extrude(amount=F3_T77_DEPTH)

    split(bisect_by=Plane(origin=(-9.3889109895, 3.3017800315, 0), x_dir=(0, 0, 1), z_dir=(0.9433666655, -0.3317519169, 0)), keep=Keep.TOP)


with BuildPart() as f3_tool79:
    # F3_s80 → F3_t81 (new body)
    with BuildSketch(Plane(origin=(11.1965023398, 31.8382699206, 0), x_dir=(0, 0, 1), z_dir=(-0.3317519169, -0.9433666655, 0))):
        with BuildLine():
            ThreePointArc((19, 9.9525575078), (19.3733971724, 8.8911420248), (19.5, 7.773108036))
            Line((19.5, 7.773108036), (19.5, 9.9525575078))
            Line((19.5, 9.9525575078), (19, 9.9525575078))
        make_face()
    extrude(amount=F3_T81_DEPTH)

    split(bisect_by=Plane(origin=(-0.3623361388, 10.264852151, 0), x_dir=(0, 0, 1), z_dir=(0.0352767491, -0.9993775818, 0)), keep=Keep.TOP)


with BuildPart() as f3_tool75_1:
    add(f3_tool75.part)

    # F3_t83: intersect F3_tool79
    add(f3_tool79.part, mode=Mode.INTERSECT)


with BuildPart() as f1_13:
    add(f1_12.part)

    # F3_t73: cut F3_tool75
    add(f3_tool75_1.part, mode=Mode.SUBTRACT)


with BuildPart() as f3_tool86:
    # F3_s87 → F3_t88 (new body)
    with BuildSketch(Plane(origin=(-0.3705355542, -1.2808223597, 0), x_dir=(0, 0, 1), z_dir=(-0.2778997323, -0.9606100868, 0))):
        with BuildLine():
            ThreePointArc((19, 10.1942050826), (19.3733971724, 9.1327895996), (19.5, 8.0147556108))
            Line((19.5, 8.0147556108), (19.5, 10.1942050826))
            Line((19.5, 10.1942050826), (19, 10.1942050826))
        make_face()
    extrude(amount=F3_T88_DEPTH)

    split(bisect_by=Plane(origin=(-6.1146612783, -7.9567329812, 0), x_dir=(0, 0, 1), z_dir=(0.6093411537, 0.7929081652, 0)), keep=Keep.TOP)


with BuildPart() as f3_tool90:
    # F3_s91 → F3_t92 (new body)
    with BuildSketch(Plane(origin=(-26.7372924148, 20.5473134516, 0), x_dir=(0, 0, 1), z_dir=(0.7929081652, -0.6093411537, 0))):
        with BuildLine():
            ThreePointArc((19, 10.0348733068), (19.3733971724, 8.9734578238), (19.5, 7.855423835))
            Line((19.5, 7.855423835), (19.5, 10.0348733068))
            Line((19.5, 10.0348733068), (19, 10.0348733068))
        make_face()
    extrude(amount=F3_T92_DEPTH)

    split(bisect_by=Plane(origin=(-9.792656229, 2.832966863, 0), x_dir=(0, 0, 1), z_dir=(0.9606100868, -0.2778997323, 0)), keep=Keep.TOP)


with BuildPart() as f3_tool86_1:
    add(f3_tool86.part)

    # F3_t94: intersect F3_tool90
    add(f3_tool90.part, mode=Mode.INTERSECT)


with BuildPart() as f1_14:
    add(f1_13.part)

    # F3_t84: cut F3_tool86
    add(f3_tool86_1.part, mode=Mode.SUBTRACT)


with BuildPart() as f3_tool97:
    # F3_s98 → F3_t99 (new body)
    with BuildSketch(Plane(origin=(1.1981670712, -0.8171749829, 0), x_dir=(0, 0, 1), z_dir=(0.8261493848, -0.563451146, 0))):
        with BuildLine():
            ThreePointArc((19, 10.1154185452), (19.3733971724, 9.0540030622), (19.5, 7.9359690734))
            Line((19.5, 7.9359690734), (19.5, 10.1154185452))
            Line((19.5, 10.1154185452), (19, 10.1154185452))
        make_face()
    extrude(amount=F3_T99_DEPTH)

    split(bisect_by=Plane(origin=(5.699544172, -8.3568468082, 0), x_dir=(0, 0, 1), z_dir=(-0.563451146, 0.8261493848, 0)), keep=Keep.TOP)


with BuildPart() as f3_tool101:
    # F3_s102 → F3_t103 (new body)
    with BuildSketch(Plane(origin=(-27.8344788416, -18.9836962796, 0), x_dir=(0, 0, 1), z_dir=(0.8261493848, 0.563451146, 0))):
        with BuildLine():
            ThreePointArc((19, 10.1154185452), (19.3733971724, 9.0540030622), (19.5, 7.9359690734))
            Line((19.5, 7.9359690734), (19.5, 10.1154185452))
            Line((19.5, 10.1154185452), (19, 10.1154185452))
        make_face()
    extrude(amount=F3_T103_DEPTH)

    split(bisect_by=Plane(origin=(-5.699544172, -8.3568468082, 0), x_dir=(0, 0, 1), z_dir=(0.563451146, 0.8261493848, 0)), keep=Keep.TOP)


with BuildPart() as f3_tool97_1:
    add(f3_tool97.part)

    # F3_t105: intersect F3_tool101
    add(f3_tool101.part, mode=Mode.INTERSECT)


with BuildPart() as f1_15:
    add(f1_14.part)

    # F3_t95: cut F3_tool97
    add(f3_tool97_1.part, mode=Mode.SUBTRACT)

    # F0 (on Top) → F4 (join)
    with BuildSketch(Plane.XY):
        Circle(F0_R)
        with BuildLine():
            ThreePointArc((28.5316954889, 9.2705098312), (29.6306502179, 4.6930339512), (30, 0))
            ThreePointArc((30, 0), (26.7301957257, -13.6197149922), (17.6335575688, -24.2705098312))
            ThreePointArc((17.6335575688, -24.2705098312), (0, -30), (-17.6335575688, -24.2705098312))
            ThreePointArc((-17.6335575688, -24.2705098312), (-28.5316954889, -9.2705098312), (-28.5316954889, 9.2705098312))
            ThreePointArc((-28.5316954889, 9.2705098312), (-17.6335575688, 24.2705098312), (0, 30))
            ThreePointArc((0, 30), (17.6335575688, 24.2705098312), (28.5316954889, 9.2705098312))
        make_face(mode=Mode.SUBTRACT)
    extrude(amount=F4_DEPTH)

    # F5 (radius 0.5 in the source; OpenCascade refuses exactly that, so slightly less here)
    f5_edges = [f1_15.edges().sort_by_distance(p)[0] for p in [
        (-17.633558, 24.27051, 19.5),
    ]]
    fillet(f5_edges, radius=F5_R)

    # F0 (on Top) → F6 (join)
    with BuildSketch(Plane.XY):
        Circle(F0_R_2)
        Circle(F0_R_3, mode=Mode.SUBTRACT)
        Circle(F0_R_3)
        Circle(F0_R, mode=Mode.SUBTRACT)
    extrude(amount=F6_DEPTH)

    # F7: fillet of radius 60 on 2 edges, made by hand

    # F7_s1 → F7_t2 (revolve, cut)
    with BuildSketch(Plane.XZ):
        with BuildLine():
            ThreePointArc((30.4980527473, 19.499996247), (54.8111578273, 14.4560946794), (75, 0))
            Line((75, 0), (79.4269472281, 4.049955338))
            ThreePointArc((79.4269472281, 4.049955338), (81, 9.75), (81, 19.5))
            Line((81, 19.5), (75, 25.5))
            ThreePointArc((75, 25.5), (30.49999, 25.5), (30.4748052502, 25.4999512096))
            Line((30.4748052502, 25.4999512096), (30.4980527473, 19.499996247))
        make_face()
    revolve(axis=Axis((0, 0, 19.5), (0, 0, 1)), mode=Mode.SUBTRACT)


solid = f1_15.part
